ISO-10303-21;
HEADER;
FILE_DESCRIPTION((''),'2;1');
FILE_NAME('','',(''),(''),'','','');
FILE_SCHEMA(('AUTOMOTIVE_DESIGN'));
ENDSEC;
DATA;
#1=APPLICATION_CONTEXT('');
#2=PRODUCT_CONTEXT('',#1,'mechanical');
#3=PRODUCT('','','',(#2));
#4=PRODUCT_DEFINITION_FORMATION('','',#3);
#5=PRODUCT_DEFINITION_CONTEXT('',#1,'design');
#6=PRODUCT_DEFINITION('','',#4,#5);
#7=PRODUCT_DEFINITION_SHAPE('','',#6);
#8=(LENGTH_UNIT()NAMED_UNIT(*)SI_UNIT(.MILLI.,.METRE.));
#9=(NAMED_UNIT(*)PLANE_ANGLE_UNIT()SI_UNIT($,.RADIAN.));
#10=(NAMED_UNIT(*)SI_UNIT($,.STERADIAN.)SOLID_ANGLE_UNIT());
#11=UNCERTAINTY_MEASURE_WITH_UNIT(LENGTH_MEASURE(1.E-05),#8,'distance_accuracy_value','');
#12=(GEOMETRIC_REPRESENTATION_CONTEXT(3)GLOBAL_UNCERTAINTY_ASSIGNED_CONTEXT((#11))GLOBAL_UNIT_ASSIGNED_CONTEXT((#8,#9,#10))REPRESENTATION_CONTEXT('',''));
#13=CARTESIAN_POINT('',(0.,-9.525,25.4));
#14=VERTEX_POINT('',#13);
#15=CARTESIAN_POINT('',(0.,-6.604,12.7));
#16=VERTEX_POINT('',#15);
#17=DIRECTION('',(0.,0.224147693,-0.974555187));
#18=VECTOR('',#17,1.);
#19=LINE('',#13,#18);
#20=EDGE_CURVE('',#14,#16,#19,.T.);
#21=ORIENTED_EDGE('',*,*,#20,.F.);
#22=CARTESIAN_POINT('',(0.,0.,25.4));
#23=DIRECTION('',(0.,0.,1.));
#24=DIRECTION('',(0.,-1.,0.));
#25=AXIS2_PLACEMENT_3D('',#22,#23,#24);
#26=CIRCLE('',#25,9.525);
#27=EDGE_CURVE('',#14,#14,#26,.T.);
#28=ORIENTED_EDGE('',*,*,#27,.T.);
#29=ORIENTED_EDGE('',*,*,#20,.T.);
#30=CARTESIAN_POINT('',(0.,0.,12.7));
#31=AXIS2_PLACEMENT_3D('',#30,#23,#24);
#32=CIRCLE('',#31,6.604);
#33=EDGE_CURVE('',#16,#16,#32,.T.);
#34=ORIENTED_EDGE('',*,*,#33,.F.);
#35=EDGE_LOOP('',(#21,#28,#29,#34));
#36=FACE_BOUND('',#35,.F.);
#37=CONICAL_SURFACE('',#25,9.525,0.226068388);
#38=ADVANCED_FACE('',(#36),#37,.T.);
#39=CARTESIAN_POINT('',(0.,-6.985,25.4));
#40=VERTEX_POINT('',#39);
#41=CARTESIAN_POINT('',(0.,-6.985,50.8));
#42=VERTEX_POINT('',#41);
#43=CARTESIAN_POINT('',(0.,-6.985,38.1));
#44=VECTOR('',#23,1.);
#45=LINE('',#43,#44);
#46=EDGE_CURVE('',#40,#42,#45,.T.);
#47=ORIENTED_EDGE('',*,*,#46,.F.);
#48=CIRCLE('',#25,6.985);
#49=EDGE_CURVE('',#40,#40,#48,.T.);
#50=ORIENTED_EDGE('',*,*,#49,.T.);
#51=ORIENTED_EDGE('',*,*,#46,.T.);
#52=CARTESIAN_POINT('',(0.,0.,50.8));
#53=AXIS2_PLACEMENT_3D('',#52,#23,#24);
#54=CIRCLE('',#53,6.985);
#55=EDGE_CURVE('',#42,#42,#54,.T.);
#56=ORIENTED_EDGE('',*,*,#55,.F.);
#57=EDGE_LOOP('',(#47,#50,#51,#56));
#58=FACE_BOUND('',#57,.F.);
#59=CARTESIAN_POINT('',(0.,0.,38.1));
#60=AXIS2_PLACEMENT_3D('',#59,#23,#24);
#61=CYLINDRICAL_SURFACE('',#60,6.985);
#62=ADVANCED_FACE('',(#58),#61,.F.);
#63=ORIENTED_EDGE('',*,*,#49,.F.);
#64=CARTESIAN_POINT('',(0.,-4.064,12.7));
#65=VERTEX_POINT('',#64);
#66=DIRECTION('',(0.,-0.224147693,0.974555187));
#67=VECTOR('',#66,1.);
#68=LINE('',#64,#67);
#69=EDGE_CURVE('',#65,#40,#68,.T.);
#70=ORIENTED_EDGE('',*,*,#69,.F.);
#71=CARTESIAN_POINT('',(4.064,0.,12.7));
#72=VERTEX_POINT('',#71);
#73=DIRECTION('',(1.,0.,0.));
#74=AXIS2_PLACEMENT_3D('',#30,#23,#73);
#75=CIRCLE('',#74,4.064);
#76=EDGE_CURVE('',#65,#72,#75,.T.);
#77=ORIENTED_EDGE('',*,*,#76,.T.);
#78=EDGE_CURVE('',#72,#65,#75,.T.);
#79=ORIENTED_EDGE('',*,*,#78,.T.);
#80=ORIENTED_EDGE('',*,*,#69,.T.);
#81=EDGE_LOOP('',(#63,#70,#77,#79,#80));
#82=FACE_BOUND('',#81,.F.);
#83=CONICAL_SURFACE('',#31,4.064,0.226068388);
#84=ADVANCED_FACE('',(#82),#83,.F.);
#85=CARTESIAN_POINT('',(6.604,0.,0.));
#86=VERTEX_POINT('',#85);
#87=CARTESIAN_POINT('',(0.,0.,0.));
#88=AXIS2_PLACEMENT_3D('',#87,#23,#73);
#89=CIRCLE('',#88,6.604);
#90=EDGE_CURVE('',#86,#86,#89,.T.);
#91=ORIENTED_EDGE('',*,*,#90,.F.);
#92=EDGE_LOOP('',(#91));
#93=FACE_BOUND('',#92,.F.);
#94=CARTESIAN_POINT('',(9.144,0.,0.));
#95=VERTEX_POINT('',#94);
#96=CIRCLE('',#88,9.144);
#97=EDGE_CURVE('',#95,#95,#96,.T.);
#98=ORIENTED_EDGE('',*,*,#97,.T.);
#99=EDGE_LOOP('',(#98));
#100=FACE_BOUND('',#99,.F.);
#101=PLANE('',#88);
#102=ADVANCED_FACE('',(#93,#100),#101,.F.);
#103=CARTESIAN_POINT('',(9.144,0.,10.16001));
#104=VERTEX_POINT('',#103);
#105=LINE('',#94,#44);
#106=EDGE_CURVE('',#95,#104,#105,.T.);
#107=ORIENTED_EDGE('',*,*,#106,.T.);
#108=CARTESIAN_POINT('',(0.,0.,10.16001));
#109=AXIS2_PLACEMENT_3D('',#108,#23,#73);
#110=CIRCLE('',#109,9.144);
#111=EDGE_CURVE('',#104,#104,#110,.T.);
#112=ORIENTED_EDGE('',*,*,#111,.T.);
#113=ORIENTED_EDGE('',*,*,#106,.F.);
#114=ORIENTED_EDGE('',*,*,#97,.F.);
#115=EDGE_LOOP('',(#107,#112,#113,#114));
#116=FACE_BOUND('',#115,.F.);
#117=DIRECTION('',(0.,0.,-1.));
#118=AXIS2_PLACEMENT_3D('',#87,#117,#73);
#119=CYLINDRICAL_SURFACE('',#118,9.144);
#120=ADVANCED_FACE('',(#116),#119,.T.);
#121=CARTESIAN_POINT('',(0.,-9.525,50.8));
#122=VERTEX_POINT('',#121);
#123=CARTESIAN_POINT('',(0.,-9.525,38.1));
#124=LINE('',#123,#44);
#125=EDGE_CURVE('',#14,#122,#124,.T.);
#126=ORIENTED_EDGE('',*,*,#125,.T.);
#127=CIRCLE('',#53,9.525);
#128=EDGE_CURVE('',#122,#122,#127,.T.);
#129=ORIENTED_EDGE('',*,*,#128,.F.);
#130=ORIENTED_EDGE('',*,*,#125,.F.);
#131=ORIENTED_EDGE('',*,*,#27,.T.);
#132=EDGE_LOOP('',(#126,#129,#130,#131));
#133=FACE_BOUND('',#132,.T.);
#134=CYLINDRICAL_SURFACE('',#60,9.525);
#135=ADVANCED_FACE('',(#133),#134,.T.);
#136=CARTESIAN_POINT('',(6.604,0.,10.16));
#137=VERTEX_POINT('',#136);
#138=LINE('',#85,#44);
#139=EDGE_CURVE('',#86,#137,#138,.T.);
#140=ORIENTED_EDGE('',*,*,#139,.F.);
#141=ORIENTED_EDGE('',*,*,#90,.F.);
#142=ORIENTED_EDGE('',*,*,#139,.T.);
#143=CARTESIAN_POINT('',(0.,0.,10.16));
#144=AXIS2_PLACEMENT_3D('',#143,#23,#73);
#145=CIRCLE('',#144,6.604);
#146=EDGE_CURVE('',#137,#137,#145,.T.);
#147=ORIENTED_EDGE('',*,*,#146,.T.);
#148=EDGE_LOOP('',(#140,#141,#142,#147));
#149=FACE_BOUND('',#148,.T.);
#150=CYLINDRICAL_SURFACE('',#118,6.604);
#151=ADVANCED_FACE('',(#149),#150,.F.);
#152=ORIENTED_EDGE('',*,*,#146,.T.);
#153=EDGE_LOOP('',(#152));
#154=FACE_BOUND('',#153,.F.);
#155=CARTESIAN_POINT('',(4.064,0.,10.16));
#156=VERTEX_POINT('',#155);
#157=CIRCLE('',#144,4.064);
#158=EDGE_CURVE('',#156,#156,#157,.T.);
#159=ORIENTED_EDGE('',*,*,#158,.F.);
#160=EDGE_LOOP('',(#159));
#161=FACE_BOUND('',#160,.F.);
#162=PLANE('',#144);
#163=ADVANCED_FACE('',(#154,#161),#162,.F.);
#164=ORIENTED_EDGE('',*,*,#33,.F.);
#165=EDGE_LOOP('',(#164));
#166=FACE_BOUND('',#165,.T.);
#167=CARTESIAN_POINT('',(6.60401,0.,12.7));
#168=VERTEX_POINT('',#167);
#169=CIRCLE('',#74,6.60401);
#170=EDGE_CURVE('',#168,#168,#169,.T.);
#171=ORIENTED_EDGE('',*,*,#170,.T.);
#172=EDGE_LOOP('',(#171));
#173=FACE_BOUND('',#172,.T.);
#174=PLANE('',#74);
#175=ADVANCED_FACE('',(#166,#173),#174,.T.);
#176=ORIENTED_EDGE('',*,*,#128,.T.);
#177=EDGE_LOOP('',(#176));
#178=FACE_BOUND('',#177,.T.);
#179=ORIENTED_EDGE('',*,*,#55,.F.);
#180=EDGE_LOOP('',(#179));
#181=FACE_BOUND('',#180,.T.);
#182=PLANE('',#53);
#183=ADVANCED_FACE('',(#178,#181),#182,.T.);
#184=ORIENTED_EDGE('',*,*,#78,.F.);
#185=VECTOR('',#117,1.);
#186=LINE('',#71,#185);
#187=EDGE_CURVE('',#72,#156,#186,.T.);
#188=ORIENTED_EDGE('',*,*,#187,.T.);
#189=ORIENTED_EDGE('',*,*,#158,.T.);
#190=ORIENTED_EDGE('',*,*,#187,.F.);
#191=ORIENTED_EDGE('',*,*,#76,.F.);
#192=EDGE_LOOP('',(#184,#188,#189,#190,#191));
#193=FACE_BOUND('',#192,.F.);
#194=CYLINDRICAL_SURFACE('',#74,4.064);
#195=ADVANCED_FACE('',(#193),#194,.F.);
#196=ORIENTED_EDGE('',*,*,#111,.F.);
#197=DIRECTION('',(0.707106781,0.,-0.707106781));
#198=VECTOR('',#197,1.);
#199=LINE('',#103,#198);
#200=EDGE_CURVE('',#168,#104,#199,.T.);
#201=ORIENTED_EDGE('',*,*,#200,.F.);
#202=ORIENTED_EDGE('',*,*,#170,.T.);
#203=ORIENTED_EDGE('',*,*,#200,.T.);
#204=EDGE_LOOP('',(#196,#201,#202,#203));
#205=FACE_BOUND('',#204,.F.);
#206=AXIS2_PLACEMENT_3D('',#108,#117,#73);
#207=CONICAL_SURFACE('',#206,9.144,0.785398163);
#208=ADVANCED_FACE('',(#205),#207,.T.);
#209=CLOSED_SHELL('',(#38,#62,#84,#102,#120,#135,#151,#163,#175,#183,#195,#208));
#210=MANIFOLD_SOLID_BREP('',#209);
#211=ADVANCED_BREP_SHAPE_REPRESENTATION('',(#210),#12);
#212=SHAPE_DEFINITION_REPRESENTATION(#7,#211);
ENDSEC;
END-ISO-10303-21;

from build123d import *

# Parameters (mm, degrees)
F0_R     = 9.144
F0_R_2   = 6.604
F1_DEPTH = 12.7
F4_R     = 6.604
F4_R_2   = 4.064
F5_DEPTH = 2.54
F2_W     = 2.54
F2_H     = 25.4
F7_SIZE  = 2.53999


# Not quite as in the source:
# - a fillet or chamfer is up to 0.001 mm smaller than in the source, because OpenCascade refuses the exact size


with BuildPart() as f1:
    # F0 (on Top) → F1 (new body)
    with BuildSketch(Plane.XY):
        Circle(F0_R)
        Circle(F0_R_2, mode=Mode.SUBTRACT)
    extrude(amount=F1_DEPTH)

    # F4 (on offset) → F5 (join)
    with BuildSketch(Plane.XY.offset(12.7)):
        Circle(F4_R)
        Circle(F4_R_2, mode=Mode.SUBTRACT)
    extrude(amount=-F5_DEPTH)

    # F2 (on Right) → F6 (revolve)
    with BuildSketch(Plane.YZ):
        Polygon((-9.525, 25.4), (-6.604, 12.7), (-4.064, 12.7), (-6.985, 25.4), align=None)
        with Locations((-8.255, 38.1)):
            Rectangle(F2_W, F2_H)
    revolve(axis=Axis((0, 0, 0), (0, 0, 1)))

    # F7 (size 2.54 in the source; OpenCascade refuses exactly that, so slightly less here)
    f7_edges = [f1.edges().sort_by_distance(p)[0] for p in [
        (-9.144, 0, 12.7),
    ]]
    chamfer(f7_edges, length=F7_SIZE)


solid = f1.part
